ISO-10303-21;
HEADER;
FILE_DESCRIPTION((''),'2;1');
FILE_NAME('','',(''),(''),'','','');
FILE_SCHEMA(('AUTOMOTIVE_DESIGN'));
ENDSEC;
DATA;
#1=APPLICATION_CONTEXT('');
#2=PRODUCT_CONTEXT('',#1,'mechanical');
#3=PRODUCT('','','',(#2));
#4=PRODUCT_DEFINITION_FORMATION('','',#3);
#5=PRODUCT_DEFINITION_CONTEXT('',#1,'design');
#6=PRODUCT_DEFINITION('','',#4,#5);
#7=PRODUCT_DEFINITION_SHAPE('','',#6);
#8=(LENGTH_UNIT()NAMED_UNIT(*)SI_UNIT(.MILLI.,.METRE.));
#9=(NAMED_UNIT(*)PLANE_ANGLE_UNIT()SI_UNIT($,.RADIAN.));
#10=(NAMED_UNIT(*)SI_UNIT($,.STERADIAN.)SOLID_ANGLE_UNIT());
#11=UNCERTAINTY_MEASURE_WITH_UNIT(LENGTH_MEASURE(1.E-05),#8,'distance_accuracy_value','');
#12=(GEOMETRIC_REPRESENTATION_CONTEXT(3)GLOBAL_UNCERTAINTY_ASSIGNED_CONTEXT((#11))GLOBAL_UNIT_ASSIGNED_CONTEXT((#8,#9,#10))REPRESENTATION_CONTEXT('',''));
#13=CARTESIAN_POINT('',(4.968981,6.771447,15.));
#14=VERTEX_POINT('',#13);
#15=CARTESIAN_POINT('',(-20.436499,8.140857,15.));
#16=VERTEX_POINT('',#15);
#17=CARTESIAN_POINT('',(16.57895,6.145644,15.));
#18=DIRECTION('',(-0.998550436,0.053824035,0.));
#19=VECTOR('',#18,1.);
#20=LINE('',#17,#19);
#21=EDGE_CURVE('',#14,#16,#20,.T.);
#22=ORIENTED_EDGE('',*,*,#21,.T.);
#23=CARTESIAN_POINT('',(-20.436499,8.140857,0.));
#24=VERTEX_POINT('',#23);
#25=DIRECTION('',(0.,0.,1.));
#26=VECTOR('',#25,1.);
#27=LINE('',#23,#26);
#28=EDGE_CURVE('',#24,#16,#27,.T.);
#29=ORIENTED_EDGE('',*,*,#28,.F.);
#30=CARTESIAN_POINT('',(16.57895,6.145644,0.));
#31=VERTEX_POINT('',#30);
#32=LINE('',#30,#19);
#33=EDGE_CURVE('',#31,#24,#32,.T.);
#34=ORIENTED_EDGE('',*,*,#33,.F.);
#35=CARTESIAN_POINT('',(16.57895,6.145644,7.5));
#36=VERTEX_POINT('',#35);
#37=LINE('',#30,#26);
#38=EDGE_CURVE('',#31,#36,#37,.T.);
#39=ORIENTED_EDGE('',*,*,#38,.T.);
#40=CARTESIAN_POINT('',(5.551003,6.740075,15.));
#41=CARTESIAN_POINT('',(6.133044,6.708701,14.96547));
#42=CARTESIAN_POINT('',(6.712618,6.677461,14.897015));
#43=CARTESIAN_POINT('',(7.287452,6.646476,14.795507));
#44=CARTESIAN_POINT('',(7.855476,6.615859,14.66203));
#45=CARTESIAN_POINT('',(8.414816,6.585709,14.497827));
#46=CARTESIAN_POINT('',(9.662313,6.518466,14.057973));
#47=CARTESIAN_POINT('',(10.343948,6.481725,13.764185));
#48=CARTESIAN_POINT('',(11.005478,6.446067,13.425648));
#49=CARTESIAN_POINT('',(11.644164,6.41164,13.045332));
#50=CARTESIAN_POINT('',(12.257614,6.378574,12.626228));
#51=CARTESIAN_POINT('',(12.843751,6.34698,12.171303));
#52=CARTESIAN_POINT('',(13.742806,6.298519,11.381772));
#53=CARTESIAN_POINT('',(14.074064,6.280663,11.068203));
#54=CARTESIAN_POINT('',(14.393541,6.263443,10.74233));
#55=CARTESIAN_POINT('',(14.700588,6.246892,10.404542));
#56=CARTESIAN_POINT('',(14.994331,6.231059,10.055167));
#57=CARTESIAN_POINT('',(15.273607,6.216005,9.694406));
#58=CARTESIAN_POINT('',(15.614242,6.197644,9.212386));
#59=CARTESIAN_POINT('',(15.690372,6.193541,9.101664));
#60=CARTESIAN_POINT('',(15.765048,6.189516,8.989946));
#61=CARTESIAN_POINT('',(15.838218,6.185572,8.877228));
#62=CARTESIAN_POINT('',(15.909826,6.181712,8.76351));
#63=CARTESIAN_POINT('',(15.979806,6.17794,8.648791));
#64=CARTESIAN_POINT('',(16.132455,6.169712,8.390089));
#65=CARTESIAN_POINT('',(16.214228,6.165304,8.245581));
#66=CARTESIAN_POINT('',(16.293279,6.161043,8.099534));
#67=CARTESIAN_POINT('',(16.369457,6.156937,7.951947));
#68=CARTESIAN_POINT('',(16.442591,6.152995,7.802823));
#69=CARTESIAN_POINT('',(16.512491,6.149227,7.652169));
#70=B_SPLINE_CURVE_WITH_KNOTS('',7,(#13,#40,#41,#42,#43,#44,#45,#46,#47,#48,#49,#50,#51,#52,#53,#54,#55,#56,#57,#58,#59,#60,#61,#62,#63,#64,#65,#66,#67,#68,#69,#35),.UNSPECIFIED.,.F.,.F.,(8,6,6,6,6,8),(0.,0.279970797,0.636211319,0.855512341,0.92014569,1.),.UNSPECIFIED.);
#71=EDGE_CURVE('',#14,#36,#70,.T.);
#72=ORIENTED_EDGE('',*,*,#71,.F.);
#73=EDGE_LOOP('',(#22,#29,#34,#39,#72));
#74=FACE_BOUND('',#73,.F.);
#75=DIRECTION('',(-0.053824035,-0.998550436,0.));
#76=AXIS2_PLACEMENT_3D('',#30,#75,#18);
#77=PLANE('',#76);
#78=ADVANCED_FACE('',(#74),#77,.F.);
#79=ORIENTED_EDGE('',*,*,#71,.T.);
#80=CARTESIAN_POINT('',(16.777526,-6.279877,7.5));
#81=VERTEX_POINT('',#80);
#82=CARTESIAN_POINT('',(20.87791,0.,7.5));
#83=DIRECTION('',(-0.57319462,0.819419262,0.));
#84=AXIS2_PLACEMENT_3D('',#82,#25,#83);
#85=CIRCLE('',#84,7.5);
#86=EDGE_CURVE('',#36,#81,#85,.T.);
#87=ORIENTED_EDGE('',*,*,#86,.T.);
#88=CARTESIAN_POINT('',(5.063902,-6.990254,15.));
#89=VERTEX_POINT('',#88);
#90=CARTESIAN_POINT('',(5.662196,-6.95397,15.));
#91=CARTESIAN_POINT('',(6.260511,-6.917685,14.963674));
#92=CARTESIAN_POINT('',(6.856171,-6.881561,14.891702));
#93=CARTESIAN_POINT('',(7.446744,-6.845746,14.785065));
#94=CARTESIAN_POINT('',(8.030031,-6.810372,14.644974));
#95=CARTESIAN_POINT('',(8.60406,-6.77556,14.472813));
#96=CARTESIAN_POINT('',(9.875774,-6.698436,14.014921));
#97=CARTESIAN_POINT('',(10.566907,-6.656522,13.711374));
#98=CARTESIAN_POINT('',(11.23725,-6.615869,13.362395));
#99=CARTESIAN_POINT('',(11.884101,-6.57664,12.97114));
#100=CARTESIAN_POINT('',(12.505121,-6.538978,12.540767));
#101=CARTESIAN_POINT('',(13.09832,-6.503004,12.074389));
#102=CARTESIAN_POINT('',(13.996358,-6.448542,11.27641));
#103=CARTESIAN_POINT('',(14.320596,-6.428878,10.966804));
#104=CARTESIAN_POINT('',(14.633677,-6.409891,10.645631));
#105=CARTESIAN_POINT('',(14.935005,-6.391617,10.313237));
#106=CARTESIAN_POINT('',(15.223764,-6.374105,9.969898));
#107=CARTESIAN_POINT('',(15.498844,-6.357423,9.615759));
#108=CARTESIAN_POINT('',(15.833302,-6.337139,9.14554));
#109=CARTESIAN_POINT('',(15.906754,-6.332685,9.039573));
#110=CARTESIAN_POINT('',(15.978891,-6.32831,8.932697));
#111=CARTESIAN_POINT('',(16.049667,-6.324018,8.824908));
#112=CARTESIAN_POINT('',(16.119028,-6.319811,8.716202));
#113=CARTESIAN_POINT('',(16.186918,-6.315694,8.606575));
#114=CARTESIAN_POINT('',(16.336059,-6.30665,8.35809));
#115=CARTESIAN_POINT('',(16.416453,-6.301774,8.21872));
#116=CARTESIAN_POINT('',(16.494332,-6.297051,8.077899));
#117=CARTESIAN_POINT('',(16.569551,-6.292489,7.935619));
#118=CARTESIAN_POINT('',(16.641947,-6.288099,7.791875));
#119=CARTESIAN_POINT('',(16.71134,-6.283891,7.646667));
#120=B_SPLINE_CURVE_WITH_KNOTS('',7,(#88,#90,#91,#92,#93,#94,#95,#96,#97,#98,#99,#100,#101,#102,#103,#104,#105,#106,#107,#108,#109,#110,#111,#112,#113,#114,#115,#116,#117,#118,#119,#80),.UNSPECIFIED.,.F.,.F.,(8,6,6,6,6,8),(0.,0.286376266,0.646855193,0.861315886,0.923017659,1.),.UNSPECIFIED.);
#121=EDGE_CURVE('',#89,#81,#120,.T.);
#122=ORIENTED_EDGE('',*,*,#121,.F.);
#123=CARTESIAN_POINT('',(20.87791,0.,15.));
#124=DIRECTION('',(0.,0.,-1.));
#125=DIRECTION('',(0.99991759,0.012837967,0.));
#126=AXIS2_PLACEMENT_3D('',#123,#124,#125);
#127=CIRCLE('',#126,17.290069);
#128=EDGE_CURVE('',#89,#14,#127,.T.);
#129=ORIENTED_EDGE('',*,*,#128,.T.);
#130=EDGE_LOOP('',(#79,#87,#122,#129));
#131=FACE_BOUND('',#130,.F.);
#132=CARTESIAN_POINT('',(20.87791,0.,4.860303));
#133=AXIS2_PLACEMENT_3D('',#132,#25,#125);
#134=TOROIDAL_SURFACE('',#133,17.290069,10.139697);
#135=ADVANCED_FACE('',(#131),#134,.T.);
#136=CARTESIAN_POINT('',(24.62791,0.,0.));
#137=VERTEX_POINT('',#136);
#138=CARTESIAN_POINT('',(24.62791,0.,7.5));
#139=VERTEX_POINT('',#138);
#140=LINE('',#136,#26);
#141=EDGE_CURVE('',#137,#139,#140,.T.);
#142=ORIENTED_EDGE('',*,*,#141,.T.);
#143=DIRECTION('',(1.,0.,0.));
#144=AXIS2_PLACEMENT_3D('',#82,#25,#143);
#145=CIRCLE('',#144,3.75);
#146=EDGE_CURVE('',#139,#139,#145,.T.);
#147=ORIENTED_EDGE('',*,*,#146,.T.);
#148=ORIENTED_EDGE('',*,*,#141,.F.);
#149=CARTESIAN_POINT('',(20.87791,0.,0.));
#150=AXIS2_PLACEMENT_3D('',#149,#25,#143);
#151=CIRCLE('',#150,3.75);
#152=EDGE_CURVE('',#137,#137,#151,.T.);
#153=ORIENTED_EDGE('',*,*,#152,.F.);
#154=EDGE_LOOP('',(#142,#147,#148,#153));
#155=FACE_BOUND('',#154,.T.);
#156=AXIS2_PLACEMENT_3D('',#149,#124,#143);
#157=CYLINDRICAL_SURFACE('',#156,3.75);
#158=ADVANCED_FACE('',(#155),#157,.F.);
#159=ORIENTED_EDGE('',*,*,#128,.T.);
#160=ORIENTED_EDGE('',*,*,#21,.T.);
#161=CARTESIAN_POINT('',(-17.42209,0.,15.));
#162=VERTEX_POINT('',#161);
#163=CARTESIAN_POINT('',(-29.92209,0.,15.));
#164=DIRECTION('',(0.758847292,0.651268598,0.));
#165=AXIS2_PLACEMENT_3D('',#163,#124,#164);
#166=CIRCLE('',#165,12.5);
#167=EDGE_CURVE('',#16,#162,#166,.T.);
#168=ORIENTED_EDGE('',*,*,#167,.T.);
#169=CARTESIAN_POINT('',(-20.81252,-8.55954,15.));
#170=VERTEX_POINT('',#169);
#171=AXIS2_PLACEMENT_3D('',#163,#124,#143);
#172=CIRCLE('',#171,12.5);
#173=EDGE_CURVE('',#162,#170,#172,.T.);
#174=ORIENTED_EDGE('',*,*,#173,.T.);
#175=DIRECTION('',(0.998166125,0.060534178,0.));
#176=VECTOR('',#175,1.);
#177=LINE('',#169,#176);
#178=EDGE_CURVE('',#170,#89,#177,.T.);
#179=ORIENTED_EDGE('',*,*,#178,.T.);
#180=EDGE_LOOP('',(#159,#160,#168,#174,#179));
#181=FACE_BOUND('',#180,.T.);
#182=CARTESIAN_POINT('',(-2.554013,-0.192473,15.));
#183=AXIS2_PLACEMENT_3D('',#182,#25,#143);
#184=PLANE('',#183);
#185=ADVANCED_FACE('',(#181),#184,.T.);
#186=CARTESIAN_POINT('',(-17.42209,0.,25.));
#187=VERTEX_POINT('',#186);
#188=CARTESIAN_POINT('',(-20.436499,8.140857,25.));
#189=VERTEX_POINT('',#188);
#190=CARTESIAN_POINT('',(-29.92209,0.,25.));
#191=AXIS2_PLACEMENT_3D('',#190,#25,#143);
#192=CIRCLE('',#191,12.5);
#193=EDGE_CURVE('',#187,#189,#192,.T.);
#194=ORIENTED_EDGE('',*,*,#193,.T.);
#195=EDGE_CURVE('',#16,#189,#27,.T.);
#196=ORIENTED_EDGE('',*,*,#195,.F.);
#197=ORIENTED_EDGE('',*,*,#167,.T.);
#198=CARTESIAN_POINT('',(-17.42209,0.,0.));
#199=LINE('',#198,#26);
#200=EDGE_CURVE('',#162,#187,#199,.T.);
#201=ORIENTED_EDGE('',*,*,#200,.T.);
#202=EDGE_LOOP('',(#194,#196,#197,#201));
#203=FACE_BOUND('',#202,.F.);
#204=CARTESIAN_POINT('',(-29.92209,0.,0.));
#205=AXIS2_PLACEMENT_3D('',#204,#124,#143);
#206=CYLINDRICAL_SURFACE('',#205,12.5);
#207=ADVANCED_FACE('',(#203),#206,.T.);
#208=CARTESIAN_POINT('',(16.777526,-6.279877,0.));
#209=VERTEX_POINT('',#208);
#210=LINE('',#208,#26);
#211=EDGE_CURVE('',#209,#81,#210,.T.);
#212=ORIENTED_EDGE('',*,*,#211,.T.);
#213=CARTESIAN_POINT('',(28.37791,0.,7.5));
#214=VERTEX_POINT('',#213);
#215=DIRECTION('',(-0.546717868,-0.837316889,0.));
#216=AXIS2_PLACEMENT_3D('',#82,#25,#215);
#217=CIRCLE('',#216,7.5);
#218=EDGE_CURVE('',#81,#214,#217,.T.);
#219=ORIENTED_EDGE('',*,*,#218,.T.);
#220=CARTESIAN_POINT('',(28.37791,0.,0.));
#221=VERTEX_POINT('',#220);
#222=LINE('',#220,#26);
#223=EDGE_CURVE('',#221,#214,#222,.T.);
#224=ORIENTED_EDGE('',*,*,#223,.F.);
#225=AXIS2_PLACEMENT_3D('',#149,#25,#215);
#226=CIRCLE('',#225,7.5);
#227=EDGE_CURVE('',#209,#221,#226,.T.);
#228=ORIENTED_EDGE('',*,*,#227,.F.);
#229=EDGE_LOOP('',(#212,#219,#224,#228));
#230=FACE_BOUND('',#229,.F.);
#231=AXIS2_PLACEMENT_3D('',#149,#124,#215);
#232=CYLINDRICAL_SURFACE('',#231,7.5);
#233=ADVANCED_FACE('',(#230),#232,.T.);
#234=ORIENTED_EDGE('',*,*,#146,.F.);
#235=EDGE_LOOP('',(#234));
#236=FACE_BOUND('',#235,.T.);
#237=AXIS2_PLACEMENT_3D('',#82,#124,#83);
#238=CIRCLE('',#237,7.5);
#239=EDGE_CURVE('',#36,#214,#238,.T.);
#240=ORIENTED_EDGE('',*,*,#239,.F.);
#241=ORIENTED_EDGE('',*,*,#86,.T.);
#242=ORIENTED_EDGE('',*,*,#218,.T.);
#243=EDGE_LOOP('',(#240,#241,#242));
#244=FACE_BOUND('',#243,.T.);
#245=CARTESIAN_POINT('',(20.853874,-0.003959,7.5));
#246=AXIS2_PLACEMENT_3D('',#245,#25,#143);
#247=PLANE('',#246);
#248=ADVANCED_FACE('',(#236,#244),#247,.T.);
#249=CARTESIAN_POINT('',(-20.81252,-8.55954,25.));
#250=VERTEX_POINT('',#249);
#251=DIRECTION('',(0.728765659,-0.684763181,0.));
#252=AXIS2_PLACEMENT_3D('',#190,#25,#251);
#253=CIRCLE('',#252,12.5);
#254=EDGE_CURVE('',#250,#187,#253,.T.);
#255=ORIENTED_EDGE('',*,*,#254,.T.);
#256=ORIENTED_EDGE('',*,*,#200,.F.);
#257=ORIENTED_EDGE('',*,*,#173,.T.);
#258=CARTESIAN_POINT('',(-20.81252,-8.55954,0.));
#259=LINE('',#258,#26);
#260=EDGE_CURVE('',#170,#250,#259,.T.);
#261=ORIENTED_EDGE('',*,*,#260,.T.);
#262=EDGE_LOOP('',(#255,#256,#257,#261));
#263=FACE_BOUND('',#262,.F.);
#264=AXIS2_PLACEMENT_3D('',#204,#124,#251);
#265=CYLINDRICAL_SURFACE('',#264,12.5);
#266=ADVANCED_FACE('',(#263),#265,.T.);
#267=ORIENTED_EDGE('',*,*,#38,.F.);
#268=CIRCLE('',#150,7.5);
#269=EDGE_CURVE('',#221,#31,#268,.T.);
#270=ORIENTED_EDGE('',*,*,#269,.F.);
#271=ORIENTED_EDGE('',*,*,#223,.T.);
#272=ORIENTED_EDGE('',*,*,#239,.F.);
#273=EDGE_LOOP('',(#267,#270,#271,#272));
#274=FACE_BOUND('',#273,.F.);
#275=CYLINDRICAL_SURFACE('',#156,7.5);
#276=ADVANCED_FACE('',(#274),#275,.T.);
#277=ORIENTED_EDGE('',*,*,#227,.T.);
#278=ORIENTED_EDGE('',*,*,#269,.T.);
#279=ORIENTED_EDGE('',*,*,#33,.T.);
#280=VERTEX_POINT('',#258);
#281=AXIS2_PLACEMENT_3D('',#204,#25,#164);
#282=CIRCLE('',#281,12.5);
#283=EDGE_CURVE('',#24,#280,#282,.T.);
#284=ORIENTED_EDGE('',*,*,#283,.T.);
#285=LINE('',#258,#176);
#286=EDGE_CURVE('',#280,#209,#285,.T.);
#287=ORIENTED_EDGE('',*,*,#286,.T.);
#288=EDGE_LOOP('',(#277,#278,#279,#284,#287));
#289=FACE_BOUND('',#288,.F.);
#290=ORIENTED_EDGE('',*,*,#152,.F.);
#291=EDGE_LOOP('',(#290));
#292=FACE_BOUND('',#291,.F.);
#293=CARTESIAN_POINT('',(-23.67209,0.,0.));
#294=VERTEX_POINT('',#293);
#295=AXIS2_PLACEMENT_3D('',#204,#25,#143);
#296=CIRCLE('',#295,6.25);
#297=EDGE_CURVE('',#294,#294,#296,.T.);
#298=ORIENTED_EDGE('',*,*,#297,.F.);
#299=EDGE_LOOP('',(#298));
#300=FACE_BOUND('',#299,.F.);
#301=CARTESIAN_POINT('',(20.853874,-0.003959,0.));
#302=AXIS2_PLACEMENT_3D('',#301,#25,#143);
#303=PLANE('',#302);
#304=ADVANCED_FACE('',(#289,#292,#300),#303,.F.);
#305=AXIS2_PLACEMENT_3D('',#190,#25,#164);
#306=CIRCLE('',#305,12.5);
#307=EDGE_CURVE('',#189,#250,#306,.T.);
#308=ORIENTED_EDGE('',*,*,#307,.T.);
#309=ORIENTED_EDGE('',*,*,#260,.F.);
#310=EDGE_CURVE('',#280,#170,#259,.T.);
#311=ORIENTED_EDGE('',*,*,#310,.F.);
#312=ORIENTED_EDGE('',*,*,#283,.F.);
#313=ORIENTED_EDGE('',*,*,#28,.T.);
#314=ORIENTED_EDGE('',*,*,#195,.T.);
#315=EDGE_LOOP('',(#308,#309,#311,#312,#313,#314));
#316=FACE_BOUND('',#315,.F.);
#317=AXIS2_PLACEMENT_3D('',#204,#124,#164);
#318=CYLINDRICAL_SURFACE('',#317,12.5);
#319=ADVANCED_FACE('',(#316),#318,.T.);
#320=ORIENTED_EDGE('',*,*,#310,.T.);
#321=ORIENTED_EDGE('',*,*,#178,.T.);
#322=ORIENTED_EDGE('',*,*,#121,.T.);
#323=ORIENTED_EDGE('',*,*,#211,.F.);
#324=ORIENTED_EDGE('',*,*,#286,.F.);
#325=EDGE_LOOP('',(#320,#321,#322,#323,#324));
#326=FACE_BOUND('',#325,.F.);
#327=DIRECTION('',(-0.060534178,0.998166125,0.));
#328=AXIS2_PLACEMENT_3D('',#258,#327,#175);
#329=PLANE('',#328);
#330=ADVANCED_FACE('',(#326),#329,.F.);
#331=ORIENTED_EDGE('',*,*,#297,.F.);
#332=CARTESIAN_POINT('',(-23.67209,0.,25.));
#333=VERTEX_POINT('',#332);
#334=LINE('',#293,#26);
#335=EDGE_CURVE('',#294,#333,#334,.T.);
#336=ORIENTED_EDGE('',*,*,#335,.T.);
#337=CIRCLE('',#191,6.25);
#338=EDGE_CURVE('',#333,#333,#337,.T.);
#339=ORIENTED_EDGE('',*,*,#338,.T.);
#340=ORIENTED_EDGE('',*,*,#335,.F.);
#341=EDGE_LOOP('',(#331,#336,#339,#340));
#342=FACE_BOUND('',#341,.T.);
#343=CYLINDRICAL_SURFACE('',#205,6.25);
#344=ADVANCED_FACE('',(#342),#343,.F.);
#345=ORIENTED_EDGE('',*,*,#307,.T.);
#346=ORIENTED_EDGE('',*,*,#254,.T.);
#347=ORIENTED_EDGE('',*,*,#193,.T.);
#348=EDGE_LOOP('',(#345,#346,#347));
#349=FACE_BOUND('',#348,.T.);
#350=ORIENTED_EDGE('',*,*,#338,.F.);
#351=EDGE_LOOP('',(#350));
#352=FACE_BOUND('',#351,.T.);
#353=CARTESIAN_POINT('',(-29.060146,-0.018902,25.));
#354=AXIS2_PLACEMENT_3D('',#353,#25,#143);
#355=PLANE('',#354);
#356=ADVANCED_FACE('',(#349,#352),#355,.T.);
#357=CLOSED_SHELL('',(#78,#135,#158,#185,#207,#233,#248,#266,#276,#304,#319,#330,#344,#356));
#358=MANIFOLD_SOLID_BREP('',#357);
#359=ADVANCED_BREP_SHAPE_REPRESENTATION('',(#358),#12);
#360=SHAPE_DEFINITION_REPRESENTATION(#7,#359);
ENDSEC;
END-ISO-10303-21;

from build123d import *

# Parameters (mm, degrees)
F0_R        = 6.25
F1_DEPTH    = 25
F2_DEPTH    = 15
F0_R_2      = 3.75
F3_DEPTH    = 7.5
F4_T2_ANGLE = 359.64


# Not quite as in the source:
# - a fillet or chamfer that OpenCascade refuses, or shapes differently, is made with other operations: its cross-section is extruded or revolved along the edge and cut away or added


with BuildPart() as f1:
    # F0 (on Top) → F1 (new body)
    with BuildSketch(Plane.XY):
        with BuildLine():
            ThreePointArc((-20.8125196211, -8.5595397618), (-18.3005664883, -4.6032795782), (-17.4220903611, 0))
            ThreePointArc((-17.4220903611, 0), (-18.1998915609, 4.3405132519), (-20.4364992075, 8.1408574773))
            ThreePointArc((-20.4364992075, 8.1408574773), (-42.4189230977, 0.2813743978), (-20.8125196211, -8.5595397618))
        make_face()
        with Locations((-29.9220903611, 0)):
            Circle(F0_R, mode=Mode.SUBTRACT)
    extrude(amount=F1_DEPTH)

    # F0 (on Top) → F2 (join)
    with BuildSketch(Plane.XY):
        with BuildLine():
            ThreePointArc((-20.4364992075, 8.1408574773), (-18.1998915609, 4.3405132519), (-17.4220903611, 0))
            ThreePointArc((-17.4220903611, 0), (-18.3005664883, -4.6032795782), (-20.8125196211, -8.5595397618))
            Line((-20.8125196211, -8.5595397618), (16.7775256305, -6.2798766695))
            ThreePointArc((16.7775256305, -6.2798766695), (13.3788672096, -0.1198442426), (16.5789499879, 6.1456444673))
            Line((16.5789499879, 6.1456444673), (-20.4364992075, 8.1408574773))
        make_face()
    extrude(amount=F2_DEPTH)

    # F0 (on Top) → F3 (join)
    with BuildSketch(Plane.XY):
        with BuildLine():
            ThreePointArc((28.3779096389, 0), (24.3425743137, 6.651774101), (16.5789499879, 6.1456444673))
            ThreePointArc((16.5789499879, 6.1456444673), (13.3788672096, -0.1198442426), (16.7775256305, -6.2798766695))
            ThreePointArc((16.7775256305, -6.2798766695), (24.4484222028, -6.5955621467), (28.3779096389, 0))
        make_face()
        with Locations((20.8779096389, 0)):
            Circle(F0_R_2, mode=Mode.SUBTRACT)
    extrude(amount=F3_DEPTH)

    # F4: fillet of radius 10.139696962 on 1 edges, made by hand

    # F4_s1 → F4_t2 (revolve, cut)
    with BuildSketch(Plane(origin=(0.0034409593, -0.268007829, 0), x_dir=(0, 0, 1), z_dir=(-0.0128379671, 0.9999175899, 0))):
        with BuildLine():
            ThreePointArc((15, 38.1662582623), (12.909501189, 31.999908969), (7.5, 28.3761890884))
            Line((7.5, 28.3761890884), (15, 28.3761890884))
            Line((15, 28.3761890884), (15, 38.1662582623))
        make_face()
    revolve(axis=Axis((20.8779096389, 0, 15), (0, 0, -1)), revolution_arc=F4_T2_ANGLE, mode=Mode.SUBTRACT)


solid = f1.part
